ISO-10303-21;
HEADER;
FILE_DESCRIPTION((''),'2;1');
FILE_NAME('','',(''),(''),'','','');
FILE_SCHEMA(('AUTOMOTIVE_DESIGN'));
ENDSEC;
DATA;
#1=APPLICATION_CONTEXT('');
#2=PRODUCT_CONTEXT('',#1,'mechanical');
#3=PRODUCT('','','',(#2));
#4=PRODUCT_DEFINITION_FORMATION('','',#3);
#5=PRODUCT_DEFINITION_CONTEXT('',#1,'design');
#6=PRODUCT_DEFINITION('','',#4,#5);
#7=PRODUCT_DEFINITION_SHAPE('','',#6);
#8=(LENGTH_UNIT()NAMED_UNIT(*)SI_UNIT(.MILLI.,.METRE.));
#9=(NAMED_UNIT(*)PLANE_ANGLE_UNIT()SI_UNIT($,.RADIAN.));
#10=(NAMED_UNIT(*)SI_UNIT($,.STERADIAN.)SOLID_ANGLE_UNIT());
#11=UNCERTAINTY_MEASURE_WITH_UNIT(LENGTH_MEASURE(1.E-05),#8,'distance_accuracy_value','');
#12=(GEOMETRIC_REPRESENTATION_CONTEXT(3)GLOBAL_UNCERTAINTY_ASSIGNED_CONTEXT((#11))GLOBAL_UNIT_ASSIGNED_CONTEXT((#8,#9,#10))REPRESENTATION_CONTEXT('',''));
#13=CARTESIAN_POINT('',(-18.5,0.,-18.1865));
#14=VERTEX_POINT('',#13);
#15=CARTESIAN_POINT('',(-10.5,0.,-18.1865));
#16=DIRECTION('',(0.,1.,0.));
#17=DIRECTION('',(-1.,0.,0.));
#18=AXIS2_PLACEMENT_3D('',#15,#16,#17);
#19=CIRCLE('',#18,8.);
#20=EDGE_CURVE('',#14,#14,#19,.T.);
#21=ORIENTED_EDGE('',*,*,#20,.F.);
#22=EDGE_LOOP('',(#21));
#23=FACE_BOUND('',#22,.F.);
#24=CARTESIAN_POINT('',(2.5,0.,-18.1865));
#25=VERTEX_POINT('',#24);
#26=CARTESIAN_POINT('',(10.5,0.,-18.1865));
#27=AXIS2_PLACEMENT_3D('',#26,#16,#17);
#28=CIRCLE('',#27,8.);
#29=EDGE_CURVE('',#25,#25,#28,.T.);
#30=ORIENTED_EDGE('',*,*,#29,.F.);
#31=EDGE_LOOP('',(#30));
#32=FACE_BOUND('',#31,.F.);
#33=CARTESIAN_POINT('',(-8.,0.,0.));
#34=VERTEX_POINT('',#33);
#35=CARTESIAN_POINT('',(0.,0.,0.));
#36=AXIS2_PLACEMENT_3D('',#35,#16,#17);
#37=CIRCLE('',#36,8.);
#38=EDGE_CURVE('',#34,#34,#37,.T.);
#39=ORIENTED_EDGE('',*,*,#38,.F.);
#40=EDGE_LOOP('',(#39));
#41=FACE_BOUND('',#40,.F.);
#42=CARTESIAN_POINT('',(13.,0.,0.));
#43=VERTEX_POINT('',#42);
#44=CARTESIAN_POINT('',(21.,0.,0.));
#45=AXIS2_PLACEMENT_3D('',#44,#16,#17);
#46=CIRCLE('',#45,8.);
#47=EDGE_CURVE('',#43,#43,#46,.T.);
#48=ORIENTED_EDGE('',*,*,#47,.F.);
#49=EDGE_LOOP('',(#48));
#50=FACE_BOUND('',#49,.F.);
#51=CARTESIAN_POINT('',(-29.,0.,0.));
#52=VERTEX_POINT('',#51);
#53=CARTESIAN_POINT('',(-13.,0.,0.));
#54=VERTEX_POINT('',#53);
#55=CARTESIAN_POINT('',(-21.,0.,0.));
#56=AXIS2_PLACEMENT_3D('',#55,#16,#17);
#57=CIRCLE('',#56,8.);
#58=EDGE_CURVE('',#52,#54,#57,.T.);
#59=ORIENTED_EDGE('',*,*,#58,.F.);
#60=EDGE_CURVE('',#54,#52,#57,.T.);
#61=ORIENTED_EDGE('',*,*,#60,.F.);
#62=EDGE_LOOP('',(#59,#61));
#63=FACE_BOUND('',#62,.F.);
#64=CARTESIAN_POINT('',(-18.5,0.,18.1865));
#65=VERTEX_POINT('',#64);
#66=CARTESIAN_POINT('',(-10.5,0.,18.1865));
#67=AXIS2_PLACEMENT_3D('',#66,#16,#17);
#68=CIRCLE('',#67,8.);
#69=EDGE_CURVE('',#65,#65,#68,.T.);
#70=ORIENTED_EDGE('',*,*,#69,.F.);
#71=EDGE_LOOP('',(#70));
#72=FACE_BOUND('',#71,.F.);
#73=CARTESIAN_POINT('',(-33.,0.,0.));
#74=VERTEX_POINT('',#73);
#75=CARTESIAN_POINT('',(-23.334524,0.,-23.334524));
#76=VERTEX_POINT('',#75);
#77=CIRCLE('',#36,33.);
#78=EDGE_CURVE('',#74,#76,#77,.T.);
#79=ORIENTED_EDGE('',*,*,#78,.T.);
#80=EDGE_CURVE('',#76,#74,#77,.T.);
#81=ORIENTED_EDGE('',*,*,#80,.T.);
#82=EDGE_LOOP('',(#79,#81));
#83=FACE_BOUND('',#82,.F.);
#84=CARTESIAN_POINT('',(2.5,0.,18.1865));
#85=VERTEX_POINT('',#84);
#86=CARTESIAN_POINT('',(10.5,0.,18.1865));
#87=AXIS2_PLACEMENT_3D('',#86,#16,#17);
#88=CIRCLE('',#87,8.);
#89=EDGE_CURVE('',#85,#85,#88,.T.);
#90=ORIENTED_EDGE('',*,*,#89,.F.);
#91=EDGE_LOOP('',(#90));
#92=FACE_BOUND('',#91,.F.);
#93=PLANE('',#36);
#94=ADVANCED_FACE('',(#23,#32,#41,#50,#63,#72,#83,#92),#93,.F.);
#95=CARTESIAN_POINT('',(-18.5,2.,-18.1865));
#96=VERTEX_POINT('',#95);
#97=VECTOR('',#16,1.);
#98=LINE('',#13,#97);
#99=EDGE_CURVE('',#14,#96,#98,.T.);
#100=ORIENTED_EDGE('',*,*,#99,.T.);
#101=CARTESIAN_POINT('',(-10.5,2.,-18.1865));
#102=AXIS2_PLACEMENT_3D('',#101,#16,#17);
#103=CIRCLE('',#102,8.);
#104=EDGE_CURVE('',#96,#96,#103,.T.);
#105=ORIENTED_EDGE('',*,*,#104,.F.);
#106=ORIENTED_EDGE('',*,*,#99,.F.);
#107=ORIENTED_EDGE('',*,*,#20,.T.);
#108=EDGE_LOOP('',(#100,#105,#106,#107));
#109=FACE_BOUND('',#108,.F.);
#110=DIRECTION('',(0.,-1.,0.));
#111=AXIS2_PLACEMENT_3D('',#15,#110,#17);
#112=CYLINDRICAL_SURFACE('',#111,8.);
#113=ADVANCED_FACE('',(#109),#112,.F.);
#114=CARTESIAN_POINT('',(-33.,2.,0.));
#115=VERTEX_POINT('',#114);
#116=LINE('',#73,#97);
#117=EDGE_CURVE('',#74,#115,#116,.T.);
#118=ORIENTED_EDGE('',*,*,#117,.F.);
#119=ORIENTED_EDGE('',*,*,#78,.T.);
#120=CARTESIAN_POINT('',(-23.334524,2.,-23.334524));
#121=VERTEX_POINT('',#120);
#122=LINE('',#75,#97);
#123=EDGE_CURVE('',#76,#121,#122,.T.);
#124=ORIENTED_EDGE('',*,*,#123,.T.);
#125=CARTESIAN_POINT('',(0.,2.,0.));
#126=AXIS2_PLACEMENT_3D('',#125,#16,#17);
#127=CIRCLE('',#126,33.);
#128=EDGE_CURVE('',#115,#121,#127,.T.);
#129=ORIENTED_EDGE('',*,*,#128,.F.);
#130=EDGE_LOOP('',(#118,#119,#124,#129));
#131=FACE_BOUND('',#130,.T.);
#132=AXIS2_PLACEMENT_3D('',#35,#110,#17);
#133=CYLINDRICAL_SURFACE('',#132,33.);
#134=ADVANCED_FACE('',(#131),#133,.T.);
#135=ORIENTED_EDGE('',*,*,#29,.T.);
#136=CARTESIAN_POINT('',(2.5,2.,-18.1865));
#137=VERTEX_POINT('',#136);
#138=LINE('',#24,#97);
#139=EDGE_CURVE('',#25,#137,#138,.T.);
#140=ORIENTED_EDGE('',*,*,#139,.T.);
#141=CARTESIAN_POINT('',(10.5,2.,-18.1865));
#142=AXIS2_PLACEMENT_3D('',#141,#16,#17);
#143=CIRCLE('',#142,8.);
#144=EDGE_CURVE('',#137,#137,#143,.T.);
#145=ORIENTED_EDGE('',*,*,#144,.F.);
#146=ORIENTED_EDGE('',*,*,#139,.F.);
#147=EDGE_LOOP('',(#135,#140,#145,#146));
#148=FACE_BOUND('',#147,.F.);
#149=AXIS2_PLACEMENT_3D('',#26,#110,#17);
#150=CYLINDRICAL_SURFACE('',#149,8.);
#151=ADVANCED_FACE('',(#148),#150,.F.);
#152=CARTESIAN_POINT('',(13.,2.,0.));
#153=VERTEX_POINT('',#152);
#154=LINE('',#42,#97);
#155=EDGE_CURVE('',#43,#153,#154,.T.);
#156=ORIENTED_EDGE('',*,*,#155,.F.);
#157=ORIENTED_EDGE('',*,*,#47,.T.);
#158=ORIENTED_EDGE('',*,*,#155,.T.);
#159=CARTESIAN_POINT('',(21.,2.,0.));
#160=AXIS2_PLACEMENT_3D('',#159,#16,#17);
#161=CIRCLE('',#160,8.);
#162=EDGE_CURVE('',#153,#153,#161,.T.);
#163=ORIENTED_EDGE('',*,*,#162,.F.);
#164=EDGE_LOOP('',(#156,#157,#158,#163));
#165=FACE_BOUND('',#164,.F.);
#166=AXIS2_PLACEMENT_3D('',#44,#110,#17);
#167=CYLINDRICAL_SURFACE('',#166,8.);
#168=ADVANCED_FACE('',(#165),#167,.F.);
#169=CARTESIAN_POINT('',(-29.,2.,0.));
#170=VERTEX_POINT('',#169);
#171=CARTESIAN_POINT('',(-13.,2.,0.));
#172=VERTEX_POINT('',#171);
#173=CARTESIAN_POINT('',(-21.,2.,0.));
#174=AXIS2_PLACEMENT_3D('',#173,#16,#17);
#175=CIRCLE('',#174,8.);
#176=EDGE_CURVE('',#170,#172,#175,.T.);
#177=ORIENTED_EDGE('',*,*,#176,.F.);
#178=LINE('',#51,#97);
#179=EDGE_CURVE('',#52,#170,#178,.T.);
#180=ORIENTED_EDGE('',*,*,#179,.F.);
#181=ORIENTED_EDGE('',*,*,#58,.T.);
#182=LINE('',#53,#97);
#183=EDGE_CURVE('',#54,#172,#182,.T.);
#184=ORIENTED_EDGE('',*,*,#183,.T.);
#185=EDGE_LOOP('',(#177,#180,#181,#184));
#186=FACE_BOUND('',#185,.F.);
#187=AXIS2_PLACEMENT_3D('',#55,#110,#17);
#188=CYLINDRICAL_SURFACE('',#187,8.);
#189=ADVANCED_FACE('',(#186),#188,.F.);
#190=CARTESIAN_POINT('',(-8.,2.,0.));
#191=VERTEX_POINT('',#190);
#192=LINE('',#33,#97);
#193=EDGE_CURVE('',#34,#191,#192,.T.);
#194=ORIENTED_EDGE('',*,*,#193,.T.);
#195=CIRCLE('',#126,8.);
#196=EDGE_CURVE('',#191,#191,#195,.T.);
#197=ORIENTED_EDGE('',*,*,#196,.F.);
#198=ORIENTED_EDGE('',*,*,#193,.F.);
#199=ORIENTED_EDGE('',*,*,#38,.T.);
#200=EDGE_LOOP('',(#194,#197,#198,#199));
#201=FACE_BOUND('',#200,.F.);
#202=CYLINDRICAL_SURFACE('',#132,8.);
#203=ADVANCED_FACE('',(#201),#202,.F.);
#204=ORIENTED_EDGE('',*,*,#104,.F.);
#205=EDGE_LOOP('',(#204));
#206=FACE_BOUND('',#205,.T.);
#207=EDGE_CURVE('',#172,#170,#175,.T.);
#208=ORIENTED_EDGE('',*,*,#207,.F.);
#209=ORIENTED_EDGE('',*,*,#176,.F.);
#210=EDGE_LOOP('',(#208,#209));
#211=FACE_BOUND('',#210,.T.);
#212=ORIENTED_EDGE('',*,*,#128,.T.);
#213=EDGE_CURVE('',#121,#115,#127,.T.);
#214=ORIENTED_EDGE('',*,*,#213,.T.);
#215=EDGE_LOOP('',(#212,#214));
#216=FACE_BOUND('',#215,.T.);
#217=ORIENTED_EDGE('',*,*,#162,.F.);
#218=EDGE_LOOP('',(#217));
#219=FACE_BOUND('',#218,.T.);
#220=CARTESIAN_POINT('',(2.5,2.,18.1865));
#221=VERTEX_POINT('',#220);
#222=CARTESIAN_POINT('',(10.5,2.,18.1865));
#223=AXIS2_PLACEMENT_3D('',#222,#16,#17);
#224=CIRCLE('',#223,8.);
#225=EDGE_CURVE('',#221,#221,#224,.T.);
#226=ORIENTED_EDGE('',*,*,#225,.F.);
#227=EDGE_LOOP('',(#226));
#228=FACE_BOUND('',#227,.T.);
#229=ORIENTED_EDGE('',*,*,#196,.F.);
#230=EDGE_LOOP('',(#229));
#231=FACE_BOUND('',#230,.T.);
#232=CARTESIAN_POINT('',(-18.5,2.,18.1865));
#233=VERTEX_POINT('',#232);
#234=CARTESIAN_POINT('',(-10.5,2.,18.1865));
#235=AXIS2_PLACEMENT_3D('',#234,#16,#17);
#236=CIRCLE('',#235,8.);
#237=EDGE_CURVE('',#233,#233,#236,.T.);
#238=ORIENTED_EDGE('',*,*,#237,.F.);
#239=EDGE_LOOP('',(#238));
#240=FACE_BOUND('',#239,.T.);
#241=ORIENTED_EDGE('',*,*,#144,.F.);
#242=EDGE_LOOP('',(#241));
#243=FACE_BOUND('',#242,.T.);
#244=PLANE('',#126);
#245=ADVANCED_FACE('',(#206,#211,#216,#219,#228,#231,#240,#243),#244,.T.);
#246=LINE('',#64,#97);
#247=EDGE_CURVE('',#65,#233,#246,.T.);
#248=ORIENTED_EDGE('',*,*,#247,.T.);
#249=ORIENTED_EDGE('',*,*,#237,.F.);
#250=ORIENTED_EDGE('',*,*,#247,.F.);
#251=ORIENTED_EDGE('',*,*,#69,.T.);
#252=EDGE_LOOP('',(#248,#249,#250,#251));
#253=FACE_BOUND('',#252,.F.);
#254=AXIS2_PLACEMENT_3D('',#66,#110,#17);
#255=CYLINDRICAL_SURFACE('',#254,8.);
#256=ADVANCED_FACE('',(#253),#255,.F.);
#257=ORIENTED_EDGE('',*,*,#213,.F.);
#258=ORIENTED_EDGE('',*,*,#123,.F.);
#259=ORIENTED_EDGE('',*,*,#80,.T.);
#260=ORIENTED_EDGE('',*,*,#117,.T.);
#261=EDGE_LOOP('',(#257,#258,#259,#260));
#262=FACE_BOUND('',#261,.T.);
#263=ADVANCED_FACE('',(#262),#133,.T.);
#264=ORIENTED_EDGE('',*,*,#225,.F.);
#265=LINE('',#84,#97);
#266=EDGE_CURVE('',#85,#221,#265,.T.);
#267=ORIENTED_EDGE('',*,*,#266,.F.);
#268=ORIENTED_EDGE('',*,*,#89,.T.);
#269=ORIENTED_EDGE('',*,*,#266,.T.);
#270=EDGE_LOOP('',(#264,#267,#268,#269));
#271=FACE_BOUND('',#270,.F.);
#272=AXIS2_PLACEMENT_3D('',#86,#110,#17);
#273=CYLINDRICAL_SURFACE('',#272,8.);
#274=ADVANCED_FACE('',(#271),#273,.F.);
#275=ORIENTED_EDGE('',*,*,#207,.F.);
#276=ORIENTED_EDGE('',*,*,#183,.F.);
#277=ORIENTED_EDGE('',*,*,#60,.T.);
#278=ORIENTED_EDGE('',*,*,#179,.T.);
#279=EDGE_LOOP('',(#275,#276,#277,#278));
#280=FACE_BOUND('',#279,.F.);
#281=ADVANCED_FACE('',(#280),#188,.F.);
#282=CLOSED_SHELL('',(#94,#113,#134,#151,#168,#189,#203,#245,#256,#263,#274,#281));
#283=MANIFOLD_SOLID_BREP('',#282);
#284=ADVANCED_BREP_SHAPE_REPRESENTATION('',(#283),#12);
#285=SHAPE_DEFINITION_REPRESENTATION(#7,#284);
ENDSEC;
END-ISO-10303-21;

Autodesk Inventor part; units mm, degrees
ref_plane "YZ Plane" through (0, 0, 0) normal (1, 0, 0) x (0, 1, 0)
ref_plane "XZ Plane" through (0, 0, 0) normal (0, 1, 0) x (-1, 0, 0)
ref_plane "XY Plane" through (0, 0, 0) normal (0, 0, 1) x (1, 0, 0)
sketch "Sketch3" plane through (0, 0, 0) normal (0, 1, 0) x (-1, 0, 0)
  circle A0 centre (0, 0) radius 33
  circle A1 centre (0, 0) radius 8
  line L0 (0, 0) -> (32, 0) construction
  line L1 (0, 0) -> (34, 0) construction
  line L2 (24.0416, -24.0416) -> (20.5061, -20.5061)
  line L3 (0, 0) -> (34, 0) construction
  line L4 (0, 0) -> (22.2739, 0)
  line L5 (0, 0) -> (21, 0)
  circle A2 centre (21, 0) radius 8
  circle A3 centre (10.5, 18.1865) radius 8
  circle A4 centre (-10.5, 18.1865) radius 8
  circle A5 centre (-21, 0) radius 8
  circle A6 centre (-10.5, -18.1865) radius 8
  circle A7 centre (10.5, -18.1865) radius 8
  dimension "d15" = 66
  dimension "d17" = 16
  dimension "d25" = 34
  dimension "d27" = 5
  dimension "d31" = 21
  dimension "d32" = 16
  dimension "d35" = 360
extrude "Extrusion1" add sketch "Sketch3" along normal blind 2
properties part number "separator"
